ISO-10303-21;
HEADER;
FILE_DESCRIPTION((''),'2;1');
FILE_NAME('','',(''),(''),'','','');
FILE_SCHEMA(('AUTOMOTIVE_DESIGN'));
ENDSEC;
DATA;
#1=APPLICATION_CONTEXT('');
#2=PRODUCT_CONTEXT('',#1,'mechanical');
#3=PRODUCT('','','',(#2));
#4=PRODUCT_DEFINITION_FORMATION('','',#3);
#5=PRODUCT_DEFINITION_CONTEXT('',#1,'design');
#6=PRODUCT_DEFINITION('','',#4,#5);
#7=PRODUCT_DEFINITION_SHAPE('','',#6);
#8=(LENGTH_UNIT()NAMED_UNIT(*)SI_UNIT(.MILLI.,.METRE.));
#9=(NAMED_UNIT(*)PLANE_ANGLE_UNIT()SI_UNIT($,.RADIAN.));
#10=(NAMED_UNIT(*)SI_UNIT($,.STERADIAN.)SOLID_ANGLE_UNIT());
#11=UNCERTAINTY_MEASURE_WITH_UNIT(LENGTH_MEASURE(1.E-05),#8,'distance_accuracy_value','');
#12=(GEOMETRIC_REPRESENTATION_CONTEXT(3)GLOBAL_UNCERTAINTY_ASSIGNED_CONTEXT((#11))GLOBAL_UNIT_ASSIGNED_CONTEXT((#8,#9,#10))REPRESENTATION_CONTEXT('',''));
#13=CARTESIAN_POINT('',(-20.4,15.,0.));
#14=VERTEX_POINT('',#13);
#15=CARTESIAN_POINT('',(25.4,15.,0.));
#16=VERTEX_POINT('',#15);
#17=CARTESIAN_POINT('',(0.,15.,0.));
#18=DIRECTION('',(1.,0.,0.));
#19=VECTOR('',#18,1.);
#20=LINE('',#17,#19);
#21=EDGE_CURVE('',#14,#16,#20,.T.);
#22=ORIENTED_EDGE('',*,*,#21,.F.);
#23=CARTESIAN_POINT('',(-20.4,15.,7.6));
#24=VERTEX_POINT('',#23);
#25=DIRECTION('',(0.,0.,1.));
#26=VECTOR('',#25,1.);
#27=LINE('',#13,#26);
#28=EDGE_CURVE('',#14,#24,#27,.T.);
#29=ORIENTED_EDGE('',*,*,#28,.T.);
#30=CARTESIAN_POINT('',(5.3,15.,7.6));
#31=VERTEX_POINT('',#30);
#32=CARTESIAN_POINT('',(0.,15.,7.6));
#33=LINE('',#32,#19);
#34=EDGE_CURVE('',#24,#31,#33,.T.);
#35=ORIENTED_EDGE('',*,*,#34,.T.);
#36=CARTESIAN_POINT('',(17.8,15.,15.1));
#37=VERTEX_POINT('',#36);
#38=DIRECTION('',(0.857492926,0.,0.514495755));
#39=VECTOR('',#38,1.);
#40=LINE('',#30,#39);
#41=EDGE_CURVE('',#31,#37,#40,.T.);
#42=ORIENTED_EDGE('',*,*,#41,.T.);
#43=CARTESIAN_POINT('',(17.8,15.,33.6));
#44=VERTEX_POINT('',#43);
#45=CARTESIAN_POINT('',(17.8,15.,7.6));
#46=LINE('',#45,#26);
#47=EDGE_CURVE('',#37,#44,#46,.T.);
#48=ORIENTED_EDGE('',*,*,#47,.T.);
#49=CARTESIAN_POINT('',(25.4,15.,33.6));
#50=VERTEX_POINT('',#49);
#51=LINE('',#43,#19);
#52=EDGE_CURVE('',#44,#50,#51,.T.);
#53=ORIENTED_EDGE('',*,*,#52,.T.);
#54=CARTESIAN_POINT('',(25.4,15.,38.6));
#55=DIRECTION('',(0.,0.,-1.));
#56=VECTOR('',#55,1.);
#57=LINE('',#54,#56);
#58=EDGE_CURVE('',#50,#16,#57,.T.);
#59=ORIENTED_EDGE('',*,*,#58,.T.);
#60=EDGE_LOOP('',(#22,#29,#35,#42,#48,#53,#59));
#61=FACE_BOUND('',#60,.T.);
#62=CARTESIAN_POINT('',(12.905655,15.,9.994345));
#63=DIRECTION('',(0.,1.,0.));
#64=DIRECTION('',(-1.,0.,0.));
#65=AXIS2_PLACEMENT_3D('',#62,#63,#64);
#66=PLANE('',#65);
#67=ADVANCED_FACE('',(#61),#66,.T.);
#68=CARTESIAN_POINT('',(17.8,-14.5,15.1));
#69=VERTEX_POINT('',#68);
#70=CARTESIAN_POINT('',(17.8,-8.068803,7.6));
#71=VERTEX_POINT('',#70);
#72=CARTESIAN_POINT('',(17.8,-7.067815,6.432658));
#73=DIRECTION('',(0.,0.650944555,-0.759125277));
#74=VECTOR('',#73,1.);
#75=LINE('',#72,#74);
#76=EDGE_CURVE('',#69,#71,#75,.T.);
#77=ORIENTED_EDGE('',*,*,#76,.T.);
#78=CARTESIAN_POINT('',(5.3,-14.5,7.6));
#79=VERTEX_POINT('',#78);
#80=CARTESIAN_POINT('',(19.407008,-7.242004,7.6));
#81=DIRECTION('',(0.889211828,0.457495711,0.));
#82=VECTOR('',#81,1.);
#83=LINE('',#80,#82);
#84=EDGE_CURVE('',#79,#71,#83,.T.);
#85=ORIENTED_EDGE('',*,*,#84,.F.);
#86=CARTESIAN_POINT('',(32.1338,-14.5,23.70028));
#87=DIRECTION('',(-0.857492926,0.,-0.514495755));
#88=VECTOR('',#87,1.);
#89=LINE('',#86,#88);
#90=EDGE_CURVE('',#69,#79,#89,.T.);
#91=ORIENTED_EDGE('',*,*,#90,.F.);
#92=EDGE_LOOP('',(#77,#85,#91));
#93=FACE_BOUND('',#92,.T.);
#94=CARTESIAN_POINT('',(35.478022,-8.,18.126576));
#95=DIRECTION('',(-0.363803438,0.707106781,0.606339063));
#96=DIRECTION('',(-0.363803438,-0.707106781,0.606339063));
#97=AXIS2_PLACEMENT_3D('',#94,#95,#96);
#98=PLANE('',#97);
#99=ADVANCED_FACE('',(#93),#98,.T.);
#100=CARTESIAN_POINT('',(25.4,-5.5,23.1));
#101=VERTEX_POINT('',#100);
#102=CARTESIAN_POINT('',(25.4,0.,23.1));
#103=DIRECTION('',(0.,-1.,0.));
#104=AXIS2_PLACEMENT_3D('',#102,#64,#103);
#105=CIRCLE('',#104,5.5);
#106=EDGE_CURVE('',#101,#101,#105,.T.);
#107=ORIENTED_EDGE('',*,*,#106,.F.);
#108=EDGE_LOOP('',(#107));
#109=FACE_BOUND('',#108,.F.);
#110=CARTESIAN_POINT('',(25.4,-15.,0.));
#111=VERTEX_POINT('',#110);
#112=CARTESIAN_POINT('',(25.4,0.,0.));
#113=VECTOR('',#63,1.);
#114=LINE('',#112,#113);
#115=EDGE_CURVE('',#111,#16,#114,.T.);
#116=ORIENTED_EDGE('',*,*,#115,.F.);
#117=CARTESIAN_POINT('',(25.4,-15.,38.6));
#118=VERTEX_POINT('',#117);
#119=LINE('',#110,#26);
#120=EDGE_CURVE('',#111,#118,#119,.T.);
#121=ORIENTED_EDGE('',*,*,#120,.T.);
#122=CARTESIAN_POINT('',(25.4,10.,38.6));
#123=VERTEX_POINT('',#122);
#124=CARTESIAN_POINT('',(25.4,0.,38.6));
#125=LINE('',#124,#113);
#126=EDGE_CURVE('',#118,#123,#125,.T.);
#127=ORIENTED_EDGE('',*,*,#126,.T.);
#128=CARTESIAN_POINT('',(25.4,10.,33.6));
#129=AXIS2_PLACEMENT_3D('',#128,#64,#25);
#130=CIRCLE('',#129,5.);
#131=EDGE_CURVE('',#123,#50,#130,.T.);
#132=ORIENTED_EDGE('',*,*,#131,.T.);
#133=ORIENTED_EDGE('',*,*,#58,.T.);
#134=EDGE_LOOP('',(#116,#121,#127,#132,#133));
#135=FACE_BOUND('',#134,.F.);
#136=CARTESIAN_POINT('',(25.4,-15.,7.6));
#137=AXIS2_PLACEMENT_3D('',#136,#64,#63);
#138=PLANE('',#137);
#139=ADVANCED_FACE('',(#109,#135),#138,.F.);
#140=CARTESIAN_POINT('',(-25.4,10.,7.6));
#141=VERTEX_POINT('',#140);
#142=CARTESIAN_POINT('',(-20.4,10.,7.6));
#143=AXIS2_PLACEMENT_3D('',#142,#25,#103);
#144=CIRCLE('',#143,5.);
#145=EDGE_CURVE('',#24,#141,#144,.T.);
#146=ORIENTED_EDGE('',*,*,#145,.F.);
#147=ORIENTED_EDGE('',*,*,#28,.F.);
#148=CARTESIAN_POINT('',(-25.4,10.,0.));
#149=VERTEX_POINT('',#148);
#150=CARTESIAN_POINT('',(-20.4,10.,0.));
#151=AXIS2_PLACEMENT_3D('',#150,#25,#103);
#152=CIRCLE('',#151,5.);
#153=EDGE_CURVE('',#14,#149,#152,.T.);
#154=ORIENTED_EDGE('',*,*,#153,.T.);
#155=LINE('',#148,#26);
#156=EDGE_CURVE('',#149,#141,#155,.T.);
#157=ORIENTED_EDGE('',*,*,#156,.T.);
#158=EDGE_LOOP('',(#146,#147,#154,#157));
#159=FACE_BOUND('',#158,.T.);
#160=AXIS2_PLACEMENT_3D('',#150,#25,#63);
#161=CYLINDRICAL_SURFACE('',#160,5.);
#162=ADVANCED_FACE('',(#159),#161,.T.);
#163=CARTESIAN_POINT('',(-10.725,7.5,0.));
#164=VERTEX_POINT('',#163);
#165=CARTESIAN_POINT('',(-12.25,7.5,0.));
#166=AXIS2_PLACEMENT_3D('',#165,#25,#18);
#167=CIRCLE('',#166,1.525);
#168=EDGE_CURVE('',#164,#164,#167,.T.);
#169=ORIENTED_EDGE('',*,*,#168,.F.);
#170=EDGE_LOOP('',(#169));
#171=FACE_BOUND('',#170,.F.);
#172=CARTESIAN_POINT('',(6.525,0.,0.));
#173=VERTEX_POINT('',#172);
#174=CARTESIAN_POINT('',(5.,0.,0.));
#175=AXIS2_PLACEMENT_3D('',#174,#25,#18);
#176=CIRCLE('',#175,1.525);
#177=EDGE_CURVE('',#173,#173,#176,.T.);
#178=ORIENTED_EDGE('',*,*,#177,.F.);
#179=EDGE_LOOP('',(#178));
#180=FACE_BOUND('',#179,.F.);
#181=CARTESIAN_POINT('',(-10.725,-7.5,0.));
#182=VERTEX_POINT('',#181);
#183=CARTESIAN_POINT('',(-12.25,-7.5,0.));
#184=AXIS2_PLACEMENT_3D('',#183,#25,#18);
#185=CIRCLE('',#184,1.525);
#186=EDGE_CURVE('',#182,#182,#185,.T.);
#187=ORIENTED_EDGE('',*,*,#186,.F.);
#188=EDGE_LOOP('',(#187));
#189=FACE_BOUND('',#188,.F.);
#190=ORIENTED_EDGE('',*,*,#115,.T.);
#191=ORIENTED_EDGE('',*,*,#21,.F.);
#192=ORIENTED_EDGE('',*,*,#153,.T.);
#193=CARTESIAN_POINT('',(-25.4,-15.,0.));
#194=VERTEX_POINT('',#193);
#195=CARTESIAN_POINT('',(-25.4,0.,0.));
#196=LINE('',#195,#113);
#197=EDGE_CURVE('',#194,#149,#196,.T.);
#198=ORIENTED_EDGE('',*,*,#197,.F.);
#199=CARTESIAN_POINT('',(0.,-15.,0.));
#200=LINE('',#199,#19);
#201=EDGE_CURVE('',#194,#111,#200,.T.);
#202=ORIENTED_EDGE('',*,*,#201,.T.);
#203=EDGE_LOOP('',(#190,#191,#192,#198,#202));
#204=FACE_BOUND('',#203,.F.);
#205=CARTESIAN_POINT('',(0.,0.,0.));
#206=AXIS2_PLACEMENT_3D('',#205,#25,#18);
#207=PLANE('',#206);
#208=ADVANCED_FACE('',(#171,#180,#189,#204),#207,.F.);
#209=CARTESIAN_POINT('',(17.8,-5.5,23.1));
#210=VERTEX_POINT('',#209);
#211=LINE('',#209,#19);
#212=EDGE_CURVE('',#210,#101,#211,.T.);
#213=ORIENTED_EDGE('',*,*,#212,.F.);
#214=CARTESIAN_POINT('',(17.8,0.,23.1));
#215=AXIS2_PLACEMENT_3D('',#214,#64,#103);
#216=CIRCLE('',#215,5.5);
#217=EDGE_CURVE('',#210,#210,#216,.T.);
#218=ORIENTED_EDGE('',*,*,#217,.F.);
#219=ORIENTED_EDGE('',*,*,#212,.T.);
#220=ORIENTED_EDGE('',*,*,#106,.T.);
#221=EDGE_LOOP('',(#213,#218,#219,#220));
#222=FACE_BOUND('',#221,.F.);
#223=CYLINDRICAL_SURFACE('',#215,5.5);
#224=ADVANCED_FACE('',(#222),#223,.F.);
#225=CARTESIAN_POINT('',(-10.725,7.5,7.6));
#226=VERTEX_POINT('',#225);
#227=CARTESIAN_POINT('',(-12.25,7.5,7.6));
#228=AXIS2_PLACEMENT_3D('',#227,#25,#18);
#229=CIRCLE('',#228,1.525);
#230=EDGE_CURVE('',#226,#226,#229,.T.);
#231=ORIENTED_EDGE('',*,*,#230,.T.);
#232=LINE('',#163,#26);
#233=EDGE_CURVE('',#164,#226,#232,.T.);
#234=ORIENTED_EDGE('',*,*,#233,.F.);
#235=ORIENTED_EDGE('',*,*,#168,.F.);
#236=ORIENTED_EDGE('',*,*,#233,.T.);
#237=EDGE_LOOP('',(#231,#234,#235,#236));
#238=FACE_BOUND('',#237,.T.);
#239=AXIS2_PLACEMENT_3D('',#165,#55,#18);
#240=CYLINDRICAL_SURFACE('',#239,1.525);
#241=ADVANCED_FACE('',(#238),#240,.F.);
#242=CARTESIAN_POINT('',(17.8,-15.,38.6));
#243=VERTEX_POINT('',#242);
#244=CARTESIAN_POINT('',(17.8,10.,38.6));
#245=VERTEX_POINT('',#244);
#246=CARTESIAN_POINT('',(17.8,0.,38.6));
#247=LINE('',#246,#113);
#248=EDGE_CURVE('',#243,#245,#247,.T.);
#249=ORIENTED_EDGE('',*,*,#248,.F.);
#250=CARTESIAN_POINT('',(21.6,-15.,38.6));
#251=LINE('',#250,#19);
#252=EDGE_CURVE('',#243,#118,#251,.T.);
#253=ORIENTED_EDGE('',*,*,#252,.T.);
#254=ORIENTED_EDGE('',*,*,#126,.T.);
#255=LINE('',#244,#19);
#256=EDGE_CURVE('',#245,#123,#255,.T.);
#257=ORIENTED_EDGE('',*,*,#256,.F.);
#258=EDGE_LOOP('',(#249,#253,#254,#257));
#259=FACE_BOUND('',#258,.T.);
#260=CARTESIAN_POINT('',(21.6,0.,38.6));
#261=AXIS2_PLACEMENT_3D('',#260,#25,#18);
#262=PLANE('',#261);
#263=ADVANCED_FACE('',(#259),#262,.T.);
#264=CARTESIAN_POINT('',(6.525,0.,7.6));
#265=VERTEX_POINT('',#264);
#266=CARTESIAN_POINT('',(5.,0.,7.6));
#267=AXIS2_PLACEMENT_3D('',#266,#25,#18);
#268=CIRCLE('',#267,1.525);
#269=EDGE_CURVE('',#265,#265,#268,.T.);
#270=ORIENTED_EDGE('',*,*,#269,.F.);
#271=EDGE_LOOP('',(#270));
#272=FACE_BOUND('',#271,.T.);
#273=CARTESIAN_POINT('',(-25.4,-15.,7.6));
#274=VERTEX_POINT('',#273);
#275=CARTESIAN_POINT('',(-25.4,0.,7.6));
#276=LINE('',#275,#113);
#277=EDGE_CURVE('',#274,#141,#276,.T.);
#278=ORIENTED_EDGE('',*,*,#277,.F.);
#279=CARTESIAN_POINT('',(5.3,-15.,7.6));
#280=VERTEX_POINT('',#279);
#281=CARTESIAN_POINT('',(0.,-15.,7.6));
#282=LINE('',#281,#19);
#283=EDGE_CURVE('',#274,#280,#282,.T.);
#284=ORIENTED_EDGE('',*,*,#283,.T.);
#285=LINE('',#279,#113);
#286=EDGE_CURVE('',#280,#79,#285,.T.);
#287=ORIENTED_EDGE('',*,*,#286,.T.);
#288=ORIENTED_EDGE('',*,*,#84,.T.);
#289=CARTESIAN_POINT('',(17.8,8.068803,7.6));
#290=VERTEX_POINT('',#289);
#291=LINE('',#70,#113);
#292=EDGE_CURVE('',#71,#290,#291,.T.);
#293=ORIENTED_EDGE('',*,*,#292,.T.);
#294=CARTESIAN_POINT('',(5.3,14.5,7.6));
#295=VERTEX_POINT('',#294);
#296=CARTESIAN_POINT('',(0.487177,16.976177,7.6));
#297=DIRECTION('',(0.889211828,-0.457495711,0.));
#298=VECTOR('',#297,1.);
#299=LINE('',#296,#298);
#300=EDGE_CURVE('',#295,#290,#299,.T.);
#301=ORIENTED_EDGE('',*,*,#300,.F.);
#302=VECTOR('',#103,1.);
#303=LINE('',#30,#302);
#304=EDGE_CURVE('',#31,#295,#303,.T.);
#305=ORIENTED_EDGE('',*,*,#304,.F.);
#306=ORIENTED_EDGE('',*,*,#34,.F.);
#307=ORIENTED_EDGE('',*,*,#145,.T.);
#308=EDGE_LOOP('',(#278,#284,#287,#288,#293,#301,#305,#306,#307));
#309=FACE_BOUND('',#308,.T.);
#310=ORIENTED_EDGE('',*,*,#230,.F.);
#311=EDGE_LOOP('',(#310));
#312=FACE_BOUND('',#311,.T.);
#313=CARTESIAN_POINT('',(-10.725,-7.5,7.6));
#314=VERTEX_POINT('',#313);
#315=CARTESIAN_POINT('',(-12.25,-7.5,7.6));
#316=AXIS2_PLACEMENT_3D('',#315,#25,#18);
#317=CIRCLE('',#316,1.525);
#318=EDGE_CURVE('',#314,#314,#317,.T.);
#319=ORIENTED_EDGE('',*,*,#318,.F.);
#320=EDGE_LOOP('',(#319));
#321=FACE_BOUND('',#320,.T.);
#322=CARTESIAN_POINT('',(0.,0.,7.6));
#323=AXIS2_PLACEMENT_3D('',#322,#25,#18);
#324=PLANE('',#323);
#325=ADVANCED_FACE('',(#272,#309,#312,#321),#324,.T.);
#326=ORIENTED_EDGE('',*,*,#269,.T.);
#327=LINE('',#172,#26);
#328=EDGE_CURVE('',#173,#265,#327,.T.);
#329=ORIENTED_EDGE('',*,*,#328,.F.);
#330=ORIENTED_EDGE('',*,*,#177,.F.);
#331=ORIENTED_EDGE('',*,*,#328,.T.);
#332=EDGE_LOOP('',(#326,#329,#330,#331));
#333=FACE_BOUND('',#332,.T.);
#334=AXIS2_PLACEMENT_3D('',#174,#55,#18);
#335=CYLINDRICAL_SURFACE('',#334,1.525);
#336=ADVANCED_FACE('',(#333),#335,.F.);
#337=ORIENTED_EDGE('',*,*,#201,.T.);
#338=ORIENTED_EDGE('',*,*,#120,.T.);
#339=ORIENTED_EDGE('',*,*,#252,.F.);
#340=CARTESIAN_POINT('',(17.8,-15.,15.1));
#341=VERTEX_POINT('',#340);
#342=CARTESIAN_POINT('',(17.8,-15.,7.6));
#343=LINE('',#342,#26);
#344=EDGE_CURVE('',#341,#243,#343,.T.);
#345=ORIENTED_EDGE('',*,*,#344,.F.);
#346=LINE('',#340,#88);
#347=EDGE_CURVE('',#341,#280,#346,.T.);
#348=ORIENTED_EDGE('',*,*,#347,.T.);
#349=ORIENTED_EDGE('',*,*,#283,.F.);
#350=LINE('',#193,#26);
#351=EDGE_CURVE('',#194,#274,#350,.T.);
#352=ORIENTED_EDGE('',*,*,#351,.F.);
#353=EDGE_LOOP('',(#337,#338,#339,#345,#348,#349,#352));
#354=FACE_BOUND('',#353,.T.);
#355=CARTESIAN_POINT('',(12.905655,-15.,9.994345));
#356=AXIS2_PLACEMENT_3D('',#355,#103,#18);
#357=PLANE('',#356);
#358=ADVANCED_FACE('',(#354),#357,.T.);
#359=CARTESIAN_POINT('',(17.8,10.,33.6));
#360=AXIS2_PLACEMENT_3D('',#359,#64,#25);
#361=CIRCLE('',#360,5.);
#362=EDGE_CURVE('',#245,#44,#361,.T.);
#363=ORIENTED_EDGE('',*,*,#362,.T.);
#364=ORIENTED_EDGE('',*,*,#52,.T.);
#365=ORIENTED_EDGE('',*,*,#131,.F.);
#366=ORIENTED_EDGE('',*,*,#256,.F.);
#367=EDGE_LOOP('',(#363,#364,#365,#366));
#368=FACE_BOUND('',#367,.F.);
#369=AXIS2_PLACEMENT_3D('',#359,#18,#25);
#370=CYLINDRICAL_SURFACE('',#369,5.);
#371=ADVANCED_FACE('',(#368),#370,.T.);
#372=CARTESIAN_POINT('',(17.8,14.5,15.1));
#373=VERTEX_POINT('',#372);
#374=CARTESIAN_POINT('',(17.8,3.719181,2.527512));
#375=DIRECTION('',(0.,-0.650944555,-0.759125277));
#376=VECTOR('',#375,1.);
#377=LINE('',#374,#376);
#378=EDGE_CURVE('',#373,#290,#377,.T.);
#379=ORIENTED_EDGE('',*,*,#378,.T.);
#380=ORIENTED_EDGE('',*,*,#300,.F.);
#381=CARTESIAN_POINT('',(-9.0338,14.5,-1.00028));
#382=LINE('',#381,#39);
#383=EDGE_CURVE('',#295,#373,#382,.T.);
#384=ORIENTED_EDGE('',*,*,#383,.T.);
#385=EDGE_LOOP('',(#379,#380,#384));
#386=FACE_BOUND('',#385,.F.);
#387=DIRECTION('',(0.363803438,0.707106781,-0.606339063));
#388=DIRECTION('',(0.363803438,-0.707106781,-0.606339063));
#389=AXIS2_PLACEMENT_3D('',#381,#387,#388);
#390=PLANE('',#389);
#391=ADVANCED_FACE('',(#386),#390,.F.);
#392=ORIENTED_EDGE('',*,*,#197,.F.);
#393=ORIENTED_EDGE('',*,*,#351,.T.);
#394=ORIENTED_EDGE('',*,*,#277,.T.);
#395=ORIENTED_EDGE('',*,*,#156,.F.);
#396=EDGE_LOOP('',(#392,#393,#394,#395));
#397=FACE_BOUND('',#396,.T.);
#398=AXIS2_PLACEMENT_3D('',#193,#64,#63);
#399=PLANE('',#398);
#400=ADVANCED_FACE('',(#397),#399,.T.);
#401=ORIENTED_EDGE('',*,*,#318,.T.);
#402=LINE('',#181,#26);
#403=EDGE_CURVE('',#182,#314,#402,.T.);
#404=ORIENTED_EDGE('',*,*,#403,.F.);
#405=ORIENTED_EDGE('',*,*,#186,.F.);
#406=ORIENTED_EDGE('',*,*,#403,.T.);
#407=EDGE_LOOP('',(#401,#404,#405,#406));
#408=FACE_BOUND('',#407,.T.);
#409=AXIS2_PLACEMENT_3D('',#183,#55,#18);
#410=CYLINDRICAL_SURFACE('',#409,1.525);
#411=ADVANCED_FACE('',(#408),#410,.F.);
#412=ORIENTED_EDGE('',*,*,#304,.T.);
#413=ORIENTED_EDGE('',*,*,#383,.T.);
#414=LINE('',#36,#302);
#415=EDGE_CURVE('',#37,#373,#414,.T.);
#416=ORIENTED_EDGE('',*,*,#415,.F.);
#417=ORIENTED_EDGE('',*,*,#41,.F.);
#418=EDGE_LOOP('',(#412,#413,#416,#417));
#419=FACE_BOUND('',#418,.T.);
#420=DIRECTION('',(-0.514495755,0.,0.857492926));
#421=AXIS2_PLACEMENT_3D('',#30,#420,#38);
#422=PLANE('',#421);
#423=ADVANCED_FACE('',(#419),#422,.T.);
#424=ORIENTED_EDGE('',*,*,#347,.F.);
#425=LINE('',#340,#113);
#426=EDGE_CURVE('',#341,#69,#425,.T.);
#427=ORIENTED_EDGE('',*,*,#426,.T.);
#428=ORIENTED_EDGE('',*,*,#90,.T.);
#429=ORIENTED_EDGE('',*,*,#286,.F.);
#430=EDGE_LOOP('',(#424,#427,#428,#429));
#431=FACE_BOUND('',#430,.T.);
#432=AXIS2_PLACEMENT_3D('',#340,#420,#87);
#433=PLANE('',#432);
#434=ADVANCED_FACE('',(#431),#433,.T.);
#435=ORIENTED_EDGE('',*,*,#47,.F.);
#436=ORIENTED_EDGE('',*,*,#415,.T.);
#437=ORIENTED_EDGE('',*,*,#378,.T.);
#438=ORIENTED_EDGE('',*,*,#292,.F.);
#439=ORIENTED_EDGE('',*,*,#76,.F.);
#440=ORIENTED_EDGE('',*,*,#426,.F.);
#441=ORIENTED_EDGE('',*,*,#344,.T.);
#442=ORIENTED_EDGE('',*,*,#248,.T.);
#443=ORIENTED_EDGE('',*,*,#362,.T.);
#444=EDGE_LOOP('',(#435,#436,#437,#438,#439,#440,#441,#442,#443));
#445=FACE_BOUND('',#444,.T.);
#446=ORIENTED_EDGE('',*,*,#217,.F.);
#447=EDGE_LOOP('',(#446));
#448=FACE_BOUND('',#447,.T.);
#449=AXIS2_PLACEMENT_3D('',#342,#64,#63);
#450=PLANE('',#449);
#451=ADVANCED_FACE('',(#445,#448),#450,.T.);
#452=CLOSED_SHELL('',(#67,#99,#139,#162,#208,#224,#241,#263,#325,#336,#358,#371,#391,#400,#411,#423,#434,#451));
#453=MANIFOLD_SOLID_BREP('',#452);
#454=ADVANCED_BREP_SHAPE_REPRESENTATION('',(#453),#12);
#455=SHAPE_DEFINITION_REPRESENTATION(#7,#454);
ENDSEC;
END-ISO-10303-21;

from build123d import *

# Parameters (mm, degrees)
F0_W          = 50.8
F0_H          = 30
F0_R          = 1.525
F1_DEPTH      = 7.6
F2_W          = 7.6
F2_H          = 30
F3_DEPTH      = 31
F4_R          = 5.5
F5_DEPTH      = 7.6
F6_R          = 5
F9_DEPTH      = 7
F10_DEPTH     = 7
F11_T4_DEPTH  = 48.0092585807
F11_T10_DEPTH = 48.0092585807


# Not quite as in the source:
# - a fillet or chamfer that OpenCascade refuses, or shapes differently, is made with other operations: its cross-section is extruded or revolved along the edge and cut away or added


with BuildPart() as f1:
    # F0 (on Top) → F1 (new body)
    with BuildSketch(Plane.XY):
        Rectangle(F0_W, F0_H)
        with Locations((-12.25, -7.5)):
            Circle(F0_R, mode=Mode.SUBTRACT)
        with Locations((-12.25, 7.5)):
            Circle(F0_R, mode=Mode.SUBTRACT)
        with Locations((5, 0)):
            Circle(F0_R, mode=Mode.SUBTRACT)
    extrude(amount=F1_DEPTH)

    # F2 (on face) → F3 (join)
    with BuildSketch(Plane.XY.offset(7.6)):
        with Locations((21.6, 0)):
            Rectangle(F2_W, F2_H)
    extrude(amount=F3_DEPTH)

    # F4 (on face) → F5 (cut)
    with BuildSketch(Plane(origin=(17.8, 0, 0), x_dir=(0, -1, 0), z_dir=(-1, 0, 0))):
        with Locations((0, 23.1)):
            Circle(F4_R)
    extrude(amount=-F5_DEPTH, mode=Mode.SUBTRACT)

    # F6
    f6_edges = [f1.edges().sort_by_distance(p)[0] for p in [
        (21.6, 15, 38.6),
        (-25.4, 15, 3.8),
    ]]
    fillet(f6_edges, radius=F6_R)

    # F7 (on face) → F9 (join)
    with BuildSketch(Plane(origin=(0, 15, 0), x_dir=(-1, 0, 0), z_dir=(0, 1, 0))):
        Polygon((-5.3, 7.6), (-17.8, 15.1), (-17.8, 7.6), align=None)
    extrude(amount=-F9_DEPTH)

    # F8 (on face) → F10 (join)
    with BuildSketch(Plane.XZ.offset(15)):
        Polygon((17.8, 7.6), (17.8, 15.1), (5.3, 7.6), align=None)
    extrude(amount=-F10_DEPTH)

    # F11: chamfer of 6.5 on 2 edges, made by hand


with BuildPart() as f11_tool2:
    # F11_s3 → F11_t4 (new body)
    with BuildSketch(Plane(origin=(-7.0837998008, 0, -4.2502798805), x_dir=(0, 1, 0), z_dir=(0.8574929257, 0, 0.5144957554))):
        Polygon((14.5, 3.7901187316), (8, -2.7098812684), (8, 3.7901187316), align=None)
    extrude(amount=F11_T4_DEPTH)

    split(bisect_by=Plane.YZ.offset(17.8), keep=Keep.BOTTOM)

    split(bisect_by=Plane.XY.offset(7.6), keep=Keep.TOP)


with BuildPart() as f1_1:
    add(f1.part)

    # F11_t1: cut F11_tool2
    add(f11_tool2.part, mode=Mode.SUBTRACT)


with BuildPart() as f11_tool8:
    # F11_s9 → F11_t10 (new body)
    with BuildSketch(Plane(origin=(34.0837998008, 0, 20.4502798805), x_dir=(0, 1, 0), z_dir=(-0.8574929257, 0, -0.5144957554))):
        Polygon((-8, 2.7098812684), (-14.5, -3.7901187316), (-8, -3.7901187316), align=None)
    extrude(amount=F11_T10_DEPTH)

    split(bisect_by=Plane.YZ.offset(17.8), keep=Keep.BOTTOM)

    split(bisect_by=Plane.XY.offset(7.6), keep=Keep.TOP)


with BuildPart() as f1_2:
    add(f1_1.part)

    # F11_t7: cut F11_tool8
    add(f11_tool8.part, mode=Mode.SUBTRACT)


solid = f1_2.part
